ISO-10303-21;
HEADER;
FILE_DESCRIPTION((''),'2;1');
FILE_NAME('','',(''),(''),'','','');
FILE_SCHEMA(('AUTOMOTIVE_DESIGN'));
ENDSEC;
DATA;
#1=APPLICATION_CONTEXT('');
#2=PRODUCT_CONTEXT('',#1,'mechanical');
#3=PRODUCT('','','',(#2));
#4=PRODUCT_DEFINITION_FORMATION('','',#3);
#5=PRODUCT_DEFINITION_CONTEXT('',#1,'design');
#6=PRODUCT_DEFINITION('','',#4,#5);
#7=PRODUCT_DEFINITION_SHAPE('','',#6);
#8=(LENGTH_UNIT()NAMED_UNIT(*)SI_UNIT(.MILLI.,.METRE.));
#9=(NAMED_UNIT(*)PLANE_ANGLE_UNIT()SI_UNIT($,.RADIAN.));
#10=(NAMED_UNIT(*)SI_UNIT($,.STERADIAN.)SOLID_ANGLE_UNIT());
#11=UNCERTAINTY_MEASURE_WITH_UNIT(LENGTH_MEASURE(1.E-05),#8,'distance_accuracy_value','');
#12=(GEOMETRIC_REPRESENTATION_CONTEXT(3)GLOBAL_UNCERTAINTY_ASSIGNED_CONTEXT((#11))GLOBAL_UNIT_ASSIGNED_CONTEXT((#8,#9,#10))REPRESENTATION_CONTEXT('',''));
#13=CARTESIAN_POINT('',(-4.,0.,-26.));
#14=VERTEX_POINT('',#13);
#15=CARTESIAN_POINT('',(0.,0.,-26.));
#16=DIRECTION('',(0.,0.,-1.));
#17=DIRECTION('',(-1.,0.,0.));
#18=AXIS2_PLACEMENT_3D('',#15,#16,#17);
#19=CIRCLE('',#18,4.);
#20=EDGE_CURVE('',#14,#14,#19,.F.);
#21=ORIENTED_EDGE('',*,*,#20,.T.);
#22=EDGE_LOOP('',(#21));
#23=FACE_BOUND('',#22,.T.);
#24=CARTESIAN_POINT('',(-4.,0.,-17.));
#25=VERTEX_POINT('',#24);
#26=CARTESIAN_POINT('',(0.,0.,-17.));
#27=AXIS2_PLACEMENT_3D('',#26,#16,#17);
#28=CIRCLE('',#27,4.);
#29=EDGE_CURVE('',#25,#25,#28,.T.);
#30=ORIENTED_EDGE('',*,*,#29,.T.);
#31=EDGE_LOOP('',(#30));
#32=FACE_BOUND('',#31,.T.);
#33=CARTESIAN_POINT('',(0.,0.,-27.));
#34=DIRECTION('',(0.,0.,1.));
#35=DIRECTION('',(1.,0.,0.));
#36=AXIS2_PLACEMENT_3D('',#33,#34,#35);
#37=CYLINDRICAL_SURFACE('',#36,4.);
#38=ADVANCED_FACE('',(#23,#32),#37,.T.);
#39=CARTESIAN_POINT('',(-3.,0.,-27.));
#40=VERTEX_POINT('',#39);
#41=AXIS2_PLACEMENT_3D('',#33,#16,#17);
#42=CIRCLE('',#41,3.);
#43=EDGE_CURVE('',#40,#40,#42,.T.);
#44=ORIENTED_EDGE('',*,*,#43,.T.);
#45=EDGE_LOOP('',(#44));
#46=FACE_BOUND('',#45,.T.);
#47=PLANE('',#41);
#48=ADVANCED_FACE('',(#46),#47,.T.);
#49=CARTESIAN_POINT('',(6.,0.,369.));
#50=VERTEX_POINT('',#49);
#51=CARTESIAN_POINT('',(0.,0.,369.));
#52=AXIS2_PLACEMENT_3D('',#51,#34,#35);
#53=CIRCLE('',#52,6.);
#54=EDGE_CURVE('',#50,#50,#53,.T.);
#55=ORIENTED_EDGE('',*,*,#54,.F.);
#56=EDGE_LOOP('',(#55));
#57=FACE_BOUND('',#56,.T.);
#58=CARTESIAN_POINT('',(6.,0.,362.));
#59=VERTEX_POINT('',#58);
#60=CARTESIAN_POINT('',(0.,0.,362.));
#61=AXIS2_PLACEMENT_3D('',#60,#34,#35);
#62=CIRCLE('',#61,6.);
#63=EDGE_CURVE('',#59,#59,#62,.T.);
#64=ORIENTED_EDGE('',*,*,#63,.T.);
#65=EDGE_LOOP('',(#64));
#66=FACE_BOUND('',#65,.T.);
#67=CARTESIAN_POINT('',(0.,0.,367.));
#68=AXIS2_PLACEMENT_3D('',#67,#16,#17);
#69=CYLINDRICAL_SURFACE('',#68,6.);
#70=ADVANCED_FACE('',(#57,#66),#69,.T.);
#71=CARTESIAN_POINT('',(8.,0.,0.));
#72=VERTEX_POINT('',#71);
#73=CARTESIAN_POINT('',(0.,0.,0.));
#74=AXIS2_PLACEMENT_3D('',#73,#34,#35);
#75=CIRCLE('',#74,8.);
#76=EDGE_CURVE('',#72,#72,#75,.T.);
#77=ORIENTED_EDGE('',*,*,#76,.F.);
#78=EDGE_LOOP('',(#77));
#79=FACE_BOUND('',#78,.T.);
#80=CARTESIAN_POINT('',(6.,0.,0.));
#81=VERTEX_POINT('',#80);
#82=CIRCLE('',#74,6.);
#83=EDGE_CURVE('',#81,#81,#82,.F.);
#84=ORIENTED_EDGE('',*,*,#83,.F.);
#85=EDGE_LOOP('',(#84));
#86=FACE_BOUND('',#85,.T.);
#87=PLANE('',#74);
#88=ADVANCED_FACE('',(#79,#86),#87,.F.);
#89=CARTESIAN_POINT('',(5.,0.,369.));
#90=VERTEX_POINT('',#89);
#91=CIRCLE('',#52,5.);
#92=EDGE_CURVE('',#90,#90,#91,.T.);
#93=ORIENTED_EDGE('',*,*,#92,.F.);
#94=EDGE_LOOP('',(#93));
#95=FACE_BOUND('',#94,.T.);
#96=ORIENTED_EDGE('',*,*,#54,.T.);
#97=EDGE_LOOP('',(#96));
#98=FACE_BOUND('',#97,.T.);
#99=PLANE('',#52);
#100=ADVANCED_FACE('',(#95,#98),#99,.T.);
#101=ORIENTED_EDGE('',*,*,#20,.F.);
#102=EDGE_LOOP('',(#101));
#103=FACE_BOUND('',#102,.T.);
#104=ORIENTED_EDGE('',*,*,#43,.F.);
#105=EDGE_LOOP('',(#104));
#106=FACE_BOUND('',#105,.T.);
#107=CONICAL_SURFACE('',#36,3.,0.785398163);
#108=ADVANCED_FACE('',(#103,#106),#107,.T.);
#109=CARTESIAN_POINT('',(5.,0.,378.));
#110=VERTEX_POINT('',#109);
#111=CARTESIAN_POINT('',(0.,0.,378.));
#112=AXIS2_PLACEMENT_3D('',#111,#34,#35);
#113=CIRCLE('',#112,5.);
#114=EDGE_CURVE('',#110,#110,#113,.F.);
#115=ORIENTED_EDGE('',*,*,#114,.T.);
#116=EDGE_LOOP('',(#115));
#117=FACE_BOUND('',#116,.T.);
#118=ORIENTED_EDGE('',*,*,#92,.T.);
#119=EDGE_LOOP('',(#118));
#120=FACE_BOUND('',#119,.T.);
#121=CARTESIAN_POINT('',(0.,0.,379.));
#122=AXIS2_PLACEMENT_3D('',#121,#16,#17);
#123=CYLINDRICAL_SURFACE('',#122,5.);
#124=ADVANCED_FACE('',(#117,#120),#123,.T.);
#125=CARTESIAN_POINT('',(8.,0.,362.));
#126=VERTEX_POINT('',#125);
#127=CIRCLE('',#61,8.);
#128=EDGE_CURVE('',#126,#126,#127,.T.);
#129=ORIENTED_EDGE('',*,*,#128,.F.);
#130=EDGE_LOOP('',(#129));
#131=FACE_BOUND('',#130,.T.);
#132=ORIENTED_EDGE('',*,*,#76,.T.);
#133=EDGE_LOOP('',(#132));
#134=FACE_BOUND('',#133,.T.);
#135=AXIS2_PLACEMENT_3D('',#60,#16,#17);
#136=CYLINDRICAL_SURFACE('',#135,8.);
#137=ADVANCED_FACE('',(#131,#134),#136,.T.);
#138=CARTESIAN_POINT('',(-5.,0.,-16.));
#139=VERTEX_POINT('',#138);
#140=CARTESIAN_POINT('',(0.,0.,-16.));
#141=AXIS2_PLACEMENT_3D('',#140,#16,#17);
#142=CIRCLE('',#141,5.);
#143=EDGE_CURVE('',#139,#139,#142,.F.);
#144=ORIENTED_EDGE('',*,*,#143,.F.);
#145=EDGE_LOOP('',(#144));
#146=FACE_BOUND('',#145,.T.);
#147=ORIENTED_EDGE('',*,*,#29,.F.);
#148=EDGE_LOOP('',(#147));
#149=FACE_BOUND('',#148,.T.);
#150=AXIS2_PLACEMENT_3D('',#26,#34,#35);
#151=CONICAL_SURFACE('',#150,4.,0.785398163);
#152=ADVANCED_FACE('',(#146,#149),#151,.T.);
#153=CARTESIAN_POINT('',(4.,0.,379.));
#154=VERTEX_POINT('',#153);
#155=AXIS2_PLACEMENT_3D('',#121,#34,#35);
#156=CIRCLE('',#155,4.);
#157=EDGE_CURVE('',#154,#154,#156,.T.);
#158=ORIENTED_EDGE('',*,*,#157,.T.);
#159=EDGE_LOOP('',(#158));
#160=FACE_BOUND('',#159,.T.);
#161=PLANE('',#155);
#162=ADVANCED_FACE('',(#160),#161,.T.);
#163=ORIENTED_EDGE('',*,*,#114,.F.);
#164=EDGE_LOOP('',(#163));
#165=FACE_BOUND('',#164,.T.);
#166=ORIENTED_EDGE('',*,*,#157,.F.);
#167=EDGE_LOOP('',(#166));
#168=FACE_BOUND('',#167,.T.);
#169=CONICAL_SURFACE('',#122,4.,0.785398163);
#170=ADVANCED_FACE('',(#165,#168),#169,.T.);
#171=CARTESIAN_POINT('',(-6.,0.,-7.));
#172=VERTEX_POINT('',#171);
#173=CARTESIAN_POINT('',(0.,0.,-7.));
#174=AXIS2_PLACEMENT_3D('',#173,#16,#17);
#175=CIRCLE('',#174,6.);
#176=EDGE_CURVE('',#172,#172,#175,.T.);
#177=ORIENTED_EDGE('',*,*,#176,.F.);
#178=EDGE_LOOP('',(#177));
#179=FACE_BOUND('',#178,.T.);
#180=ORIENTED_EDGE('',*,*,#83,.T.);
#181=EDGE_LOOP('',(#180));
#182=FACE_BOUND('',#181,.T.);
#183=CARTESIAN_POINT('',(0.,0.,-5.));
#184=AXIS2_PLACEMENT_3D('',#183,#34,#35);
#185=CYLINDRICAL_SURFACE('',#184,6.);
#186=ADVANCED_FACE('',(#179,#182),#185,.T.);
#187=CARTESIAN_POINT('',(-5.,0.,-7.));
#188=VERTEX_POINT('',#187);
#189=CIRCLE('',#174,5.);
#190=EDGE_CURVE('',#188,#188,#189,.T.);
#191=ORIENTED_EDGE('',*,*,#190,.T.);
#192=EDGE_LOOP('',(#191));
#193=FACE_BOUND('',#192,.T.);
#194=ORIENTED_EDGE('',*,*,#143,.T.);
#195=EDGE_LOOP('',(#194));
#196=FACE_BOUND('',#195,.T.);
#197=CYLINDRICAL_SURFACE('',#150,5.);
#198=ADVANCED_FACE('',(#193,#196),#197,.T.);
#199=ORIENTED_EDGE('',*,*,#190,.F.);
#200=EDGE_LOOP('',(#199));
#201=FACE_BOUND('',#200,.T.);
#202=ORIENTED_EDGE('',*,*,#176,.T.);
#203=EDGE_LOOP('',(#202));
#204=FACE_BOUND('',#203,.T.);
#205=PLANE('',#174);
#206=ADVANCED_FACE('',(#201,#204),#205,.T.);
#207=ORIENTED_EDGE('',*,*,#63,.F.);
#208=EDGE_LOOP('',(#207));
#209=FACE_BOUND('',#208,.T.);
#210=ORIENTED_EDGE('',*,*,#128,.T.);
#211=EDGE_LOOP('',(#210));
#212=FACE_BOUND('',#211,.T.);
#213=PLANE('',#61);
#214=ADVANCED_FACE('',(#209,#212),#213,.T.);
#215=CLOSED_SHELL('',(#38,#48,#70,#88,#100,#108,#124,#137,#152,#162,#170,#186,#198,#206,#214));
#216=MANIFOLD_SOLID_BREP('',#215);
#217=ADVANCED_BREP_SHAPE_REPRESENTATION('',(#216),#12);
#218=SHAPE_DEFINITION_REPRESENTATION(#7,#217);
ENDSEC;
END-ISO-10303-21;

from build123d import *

# Parameters (mm, degrees)
SKETCH1_R           = 8
BOSS_EXTRUDE1_DEPTH = 362
SKETCH6_R           = 6
BOSS_EXTRUDE2_DEPTH = 5
SKETCH7_R           = 6
BOSS_EXTRUDE3_DEPTH = 2
SKETCH8_R           = 5
BOSS_EXTRUDE4_DEPTH = 10
SKETCH9_R           = 4
BOSS_EXTRUDE5_DEPTH = 10
CHAMFER1_SIZE       = 1
CHAMFER2_SIZE       = 1
BOSS_EXTRUDE6_START = 5
SKETCH10_R          = 6
BOSS_EXTRUDE6_DEPTH = 5
BOSS_EXTRUDE7_START = 2
SKETCH11_R          = 6
BOSS_EXTRUDE7_DEPTH = 2
BOSS_EXTRUDE8_START = 10
SKETCH12_R          = 5
BOSS_EXTRUDE8_DEPTH = 10
CHAMFER3_SIZE       = 1


with BuildPart() as part:
    # Sketch1 → Boss-Extrude1 (new body)
    with BuildSketch(Plane.XY):
        Circle(SKETCH1_R)
    extrude(amount=BOSS_EXTRUDE1_DEPTH)

    # Sketch6 → Boss-Extrude2 (add)
    with BuildSketch(Plane(origin=(0, 0, 0), x_dir=(-1, 0, 0), z_dir=(0, 0, -1))):
        with Locations(Location((0, 0, 0), (0, 0, 180))):
            Circle(SKETCH6_R)
    extrude(amount=BOSS_EXTRUDE2_DEPTH)

    # Sketch7 → Boss-Extrude3 (add)
    with BuildSketch(Plane(origin=(0, 0, -5), x_dir=(-1, 0, 0), z_dir=(0, 0, -1))):
        with Locations(Location((0, 0, 0), (0, 0, 180))):
            Circle(SKETCH7_R)
    extrude(amount=BOSS_EXTRUDE3_DEPTH)

    # Sketch8 → Boss-Extrude4 (add)
    with BuildSketch(Plane(origin=(0, 0, -7), x_dir=(-1, 0, 0), z_dir=(0, 0, -1))):
        Circle(SKETCH8_R)
    extrude(amount=BOSS_EXTRUDE4_DEPTH)

    # Sketch9 → Boss-Extrude5 (add)
    with BuildSketch(Plane(origin=(0, 0, -17), x_dir=(-1, 0, 0), z_dir=(0, 0, -1))):
        Circle(SKETCH9_R)
    extrude(amount=BOSS_EXTRUDE5_DEPTH)

    # Chamfer1
    chamfer1_edges = [part.edges().sort_by_distance(p)[0] for p in [
        (5, 0, -17),
    ]]
    chamfer(chamfer1_edges, length=CHAMFER1_SIZE - 0.0001)  # a hair under: the kernel refuses the full size

    # Chamfer2
    chamfer2_edges = [part.edges().sort_by_distance(p)[0] for p in [
        (4, 0, -27),
    ]]
    chamfer(chamfer2_edges, length=CHAMFER2_SIZE)

    # Sketch10 → Boss-Extrude6 (add)
    with BuildSketch(Plane.XY.offset(362).offset(BOSS_EXTRUDE6_START)):
        Circle(SKETCH10_R)
    extrude(amount=-BOSS_EXTRUDE6_DEPTH)

    # Sketch11 → Boss-Extrude7 (add)
    with BuildSketch(Plane.XY.offset(367).offset(BOSS_EXTRUDE7_START)):
        Circle(SKETCH11_R)
    extrude(amount=-BOSS_EXTRUDE7_DEPTH)

    # Sketch12 → Boss-Extrude8 (add)
    with BuildSketch(Plane.XY.offset(369).offset(BOSS_EXTRUDE8_START)):
        with Locations(Location((0, 0, 0), (0, 0, 180))):
            Circle(SKETCH12_R)
    extrude(amount=-BOSS_EXTRUDE8_DEPTH)

    # Chamfer3
    chamfer3_edges = [part.edges().sort_by_distance(p)[0] for p in [
        (5, 0, 379),
    ]]
    chamfer(chamfer3_edges, length=CHAMFER3_SIZE)


solid = part.part
